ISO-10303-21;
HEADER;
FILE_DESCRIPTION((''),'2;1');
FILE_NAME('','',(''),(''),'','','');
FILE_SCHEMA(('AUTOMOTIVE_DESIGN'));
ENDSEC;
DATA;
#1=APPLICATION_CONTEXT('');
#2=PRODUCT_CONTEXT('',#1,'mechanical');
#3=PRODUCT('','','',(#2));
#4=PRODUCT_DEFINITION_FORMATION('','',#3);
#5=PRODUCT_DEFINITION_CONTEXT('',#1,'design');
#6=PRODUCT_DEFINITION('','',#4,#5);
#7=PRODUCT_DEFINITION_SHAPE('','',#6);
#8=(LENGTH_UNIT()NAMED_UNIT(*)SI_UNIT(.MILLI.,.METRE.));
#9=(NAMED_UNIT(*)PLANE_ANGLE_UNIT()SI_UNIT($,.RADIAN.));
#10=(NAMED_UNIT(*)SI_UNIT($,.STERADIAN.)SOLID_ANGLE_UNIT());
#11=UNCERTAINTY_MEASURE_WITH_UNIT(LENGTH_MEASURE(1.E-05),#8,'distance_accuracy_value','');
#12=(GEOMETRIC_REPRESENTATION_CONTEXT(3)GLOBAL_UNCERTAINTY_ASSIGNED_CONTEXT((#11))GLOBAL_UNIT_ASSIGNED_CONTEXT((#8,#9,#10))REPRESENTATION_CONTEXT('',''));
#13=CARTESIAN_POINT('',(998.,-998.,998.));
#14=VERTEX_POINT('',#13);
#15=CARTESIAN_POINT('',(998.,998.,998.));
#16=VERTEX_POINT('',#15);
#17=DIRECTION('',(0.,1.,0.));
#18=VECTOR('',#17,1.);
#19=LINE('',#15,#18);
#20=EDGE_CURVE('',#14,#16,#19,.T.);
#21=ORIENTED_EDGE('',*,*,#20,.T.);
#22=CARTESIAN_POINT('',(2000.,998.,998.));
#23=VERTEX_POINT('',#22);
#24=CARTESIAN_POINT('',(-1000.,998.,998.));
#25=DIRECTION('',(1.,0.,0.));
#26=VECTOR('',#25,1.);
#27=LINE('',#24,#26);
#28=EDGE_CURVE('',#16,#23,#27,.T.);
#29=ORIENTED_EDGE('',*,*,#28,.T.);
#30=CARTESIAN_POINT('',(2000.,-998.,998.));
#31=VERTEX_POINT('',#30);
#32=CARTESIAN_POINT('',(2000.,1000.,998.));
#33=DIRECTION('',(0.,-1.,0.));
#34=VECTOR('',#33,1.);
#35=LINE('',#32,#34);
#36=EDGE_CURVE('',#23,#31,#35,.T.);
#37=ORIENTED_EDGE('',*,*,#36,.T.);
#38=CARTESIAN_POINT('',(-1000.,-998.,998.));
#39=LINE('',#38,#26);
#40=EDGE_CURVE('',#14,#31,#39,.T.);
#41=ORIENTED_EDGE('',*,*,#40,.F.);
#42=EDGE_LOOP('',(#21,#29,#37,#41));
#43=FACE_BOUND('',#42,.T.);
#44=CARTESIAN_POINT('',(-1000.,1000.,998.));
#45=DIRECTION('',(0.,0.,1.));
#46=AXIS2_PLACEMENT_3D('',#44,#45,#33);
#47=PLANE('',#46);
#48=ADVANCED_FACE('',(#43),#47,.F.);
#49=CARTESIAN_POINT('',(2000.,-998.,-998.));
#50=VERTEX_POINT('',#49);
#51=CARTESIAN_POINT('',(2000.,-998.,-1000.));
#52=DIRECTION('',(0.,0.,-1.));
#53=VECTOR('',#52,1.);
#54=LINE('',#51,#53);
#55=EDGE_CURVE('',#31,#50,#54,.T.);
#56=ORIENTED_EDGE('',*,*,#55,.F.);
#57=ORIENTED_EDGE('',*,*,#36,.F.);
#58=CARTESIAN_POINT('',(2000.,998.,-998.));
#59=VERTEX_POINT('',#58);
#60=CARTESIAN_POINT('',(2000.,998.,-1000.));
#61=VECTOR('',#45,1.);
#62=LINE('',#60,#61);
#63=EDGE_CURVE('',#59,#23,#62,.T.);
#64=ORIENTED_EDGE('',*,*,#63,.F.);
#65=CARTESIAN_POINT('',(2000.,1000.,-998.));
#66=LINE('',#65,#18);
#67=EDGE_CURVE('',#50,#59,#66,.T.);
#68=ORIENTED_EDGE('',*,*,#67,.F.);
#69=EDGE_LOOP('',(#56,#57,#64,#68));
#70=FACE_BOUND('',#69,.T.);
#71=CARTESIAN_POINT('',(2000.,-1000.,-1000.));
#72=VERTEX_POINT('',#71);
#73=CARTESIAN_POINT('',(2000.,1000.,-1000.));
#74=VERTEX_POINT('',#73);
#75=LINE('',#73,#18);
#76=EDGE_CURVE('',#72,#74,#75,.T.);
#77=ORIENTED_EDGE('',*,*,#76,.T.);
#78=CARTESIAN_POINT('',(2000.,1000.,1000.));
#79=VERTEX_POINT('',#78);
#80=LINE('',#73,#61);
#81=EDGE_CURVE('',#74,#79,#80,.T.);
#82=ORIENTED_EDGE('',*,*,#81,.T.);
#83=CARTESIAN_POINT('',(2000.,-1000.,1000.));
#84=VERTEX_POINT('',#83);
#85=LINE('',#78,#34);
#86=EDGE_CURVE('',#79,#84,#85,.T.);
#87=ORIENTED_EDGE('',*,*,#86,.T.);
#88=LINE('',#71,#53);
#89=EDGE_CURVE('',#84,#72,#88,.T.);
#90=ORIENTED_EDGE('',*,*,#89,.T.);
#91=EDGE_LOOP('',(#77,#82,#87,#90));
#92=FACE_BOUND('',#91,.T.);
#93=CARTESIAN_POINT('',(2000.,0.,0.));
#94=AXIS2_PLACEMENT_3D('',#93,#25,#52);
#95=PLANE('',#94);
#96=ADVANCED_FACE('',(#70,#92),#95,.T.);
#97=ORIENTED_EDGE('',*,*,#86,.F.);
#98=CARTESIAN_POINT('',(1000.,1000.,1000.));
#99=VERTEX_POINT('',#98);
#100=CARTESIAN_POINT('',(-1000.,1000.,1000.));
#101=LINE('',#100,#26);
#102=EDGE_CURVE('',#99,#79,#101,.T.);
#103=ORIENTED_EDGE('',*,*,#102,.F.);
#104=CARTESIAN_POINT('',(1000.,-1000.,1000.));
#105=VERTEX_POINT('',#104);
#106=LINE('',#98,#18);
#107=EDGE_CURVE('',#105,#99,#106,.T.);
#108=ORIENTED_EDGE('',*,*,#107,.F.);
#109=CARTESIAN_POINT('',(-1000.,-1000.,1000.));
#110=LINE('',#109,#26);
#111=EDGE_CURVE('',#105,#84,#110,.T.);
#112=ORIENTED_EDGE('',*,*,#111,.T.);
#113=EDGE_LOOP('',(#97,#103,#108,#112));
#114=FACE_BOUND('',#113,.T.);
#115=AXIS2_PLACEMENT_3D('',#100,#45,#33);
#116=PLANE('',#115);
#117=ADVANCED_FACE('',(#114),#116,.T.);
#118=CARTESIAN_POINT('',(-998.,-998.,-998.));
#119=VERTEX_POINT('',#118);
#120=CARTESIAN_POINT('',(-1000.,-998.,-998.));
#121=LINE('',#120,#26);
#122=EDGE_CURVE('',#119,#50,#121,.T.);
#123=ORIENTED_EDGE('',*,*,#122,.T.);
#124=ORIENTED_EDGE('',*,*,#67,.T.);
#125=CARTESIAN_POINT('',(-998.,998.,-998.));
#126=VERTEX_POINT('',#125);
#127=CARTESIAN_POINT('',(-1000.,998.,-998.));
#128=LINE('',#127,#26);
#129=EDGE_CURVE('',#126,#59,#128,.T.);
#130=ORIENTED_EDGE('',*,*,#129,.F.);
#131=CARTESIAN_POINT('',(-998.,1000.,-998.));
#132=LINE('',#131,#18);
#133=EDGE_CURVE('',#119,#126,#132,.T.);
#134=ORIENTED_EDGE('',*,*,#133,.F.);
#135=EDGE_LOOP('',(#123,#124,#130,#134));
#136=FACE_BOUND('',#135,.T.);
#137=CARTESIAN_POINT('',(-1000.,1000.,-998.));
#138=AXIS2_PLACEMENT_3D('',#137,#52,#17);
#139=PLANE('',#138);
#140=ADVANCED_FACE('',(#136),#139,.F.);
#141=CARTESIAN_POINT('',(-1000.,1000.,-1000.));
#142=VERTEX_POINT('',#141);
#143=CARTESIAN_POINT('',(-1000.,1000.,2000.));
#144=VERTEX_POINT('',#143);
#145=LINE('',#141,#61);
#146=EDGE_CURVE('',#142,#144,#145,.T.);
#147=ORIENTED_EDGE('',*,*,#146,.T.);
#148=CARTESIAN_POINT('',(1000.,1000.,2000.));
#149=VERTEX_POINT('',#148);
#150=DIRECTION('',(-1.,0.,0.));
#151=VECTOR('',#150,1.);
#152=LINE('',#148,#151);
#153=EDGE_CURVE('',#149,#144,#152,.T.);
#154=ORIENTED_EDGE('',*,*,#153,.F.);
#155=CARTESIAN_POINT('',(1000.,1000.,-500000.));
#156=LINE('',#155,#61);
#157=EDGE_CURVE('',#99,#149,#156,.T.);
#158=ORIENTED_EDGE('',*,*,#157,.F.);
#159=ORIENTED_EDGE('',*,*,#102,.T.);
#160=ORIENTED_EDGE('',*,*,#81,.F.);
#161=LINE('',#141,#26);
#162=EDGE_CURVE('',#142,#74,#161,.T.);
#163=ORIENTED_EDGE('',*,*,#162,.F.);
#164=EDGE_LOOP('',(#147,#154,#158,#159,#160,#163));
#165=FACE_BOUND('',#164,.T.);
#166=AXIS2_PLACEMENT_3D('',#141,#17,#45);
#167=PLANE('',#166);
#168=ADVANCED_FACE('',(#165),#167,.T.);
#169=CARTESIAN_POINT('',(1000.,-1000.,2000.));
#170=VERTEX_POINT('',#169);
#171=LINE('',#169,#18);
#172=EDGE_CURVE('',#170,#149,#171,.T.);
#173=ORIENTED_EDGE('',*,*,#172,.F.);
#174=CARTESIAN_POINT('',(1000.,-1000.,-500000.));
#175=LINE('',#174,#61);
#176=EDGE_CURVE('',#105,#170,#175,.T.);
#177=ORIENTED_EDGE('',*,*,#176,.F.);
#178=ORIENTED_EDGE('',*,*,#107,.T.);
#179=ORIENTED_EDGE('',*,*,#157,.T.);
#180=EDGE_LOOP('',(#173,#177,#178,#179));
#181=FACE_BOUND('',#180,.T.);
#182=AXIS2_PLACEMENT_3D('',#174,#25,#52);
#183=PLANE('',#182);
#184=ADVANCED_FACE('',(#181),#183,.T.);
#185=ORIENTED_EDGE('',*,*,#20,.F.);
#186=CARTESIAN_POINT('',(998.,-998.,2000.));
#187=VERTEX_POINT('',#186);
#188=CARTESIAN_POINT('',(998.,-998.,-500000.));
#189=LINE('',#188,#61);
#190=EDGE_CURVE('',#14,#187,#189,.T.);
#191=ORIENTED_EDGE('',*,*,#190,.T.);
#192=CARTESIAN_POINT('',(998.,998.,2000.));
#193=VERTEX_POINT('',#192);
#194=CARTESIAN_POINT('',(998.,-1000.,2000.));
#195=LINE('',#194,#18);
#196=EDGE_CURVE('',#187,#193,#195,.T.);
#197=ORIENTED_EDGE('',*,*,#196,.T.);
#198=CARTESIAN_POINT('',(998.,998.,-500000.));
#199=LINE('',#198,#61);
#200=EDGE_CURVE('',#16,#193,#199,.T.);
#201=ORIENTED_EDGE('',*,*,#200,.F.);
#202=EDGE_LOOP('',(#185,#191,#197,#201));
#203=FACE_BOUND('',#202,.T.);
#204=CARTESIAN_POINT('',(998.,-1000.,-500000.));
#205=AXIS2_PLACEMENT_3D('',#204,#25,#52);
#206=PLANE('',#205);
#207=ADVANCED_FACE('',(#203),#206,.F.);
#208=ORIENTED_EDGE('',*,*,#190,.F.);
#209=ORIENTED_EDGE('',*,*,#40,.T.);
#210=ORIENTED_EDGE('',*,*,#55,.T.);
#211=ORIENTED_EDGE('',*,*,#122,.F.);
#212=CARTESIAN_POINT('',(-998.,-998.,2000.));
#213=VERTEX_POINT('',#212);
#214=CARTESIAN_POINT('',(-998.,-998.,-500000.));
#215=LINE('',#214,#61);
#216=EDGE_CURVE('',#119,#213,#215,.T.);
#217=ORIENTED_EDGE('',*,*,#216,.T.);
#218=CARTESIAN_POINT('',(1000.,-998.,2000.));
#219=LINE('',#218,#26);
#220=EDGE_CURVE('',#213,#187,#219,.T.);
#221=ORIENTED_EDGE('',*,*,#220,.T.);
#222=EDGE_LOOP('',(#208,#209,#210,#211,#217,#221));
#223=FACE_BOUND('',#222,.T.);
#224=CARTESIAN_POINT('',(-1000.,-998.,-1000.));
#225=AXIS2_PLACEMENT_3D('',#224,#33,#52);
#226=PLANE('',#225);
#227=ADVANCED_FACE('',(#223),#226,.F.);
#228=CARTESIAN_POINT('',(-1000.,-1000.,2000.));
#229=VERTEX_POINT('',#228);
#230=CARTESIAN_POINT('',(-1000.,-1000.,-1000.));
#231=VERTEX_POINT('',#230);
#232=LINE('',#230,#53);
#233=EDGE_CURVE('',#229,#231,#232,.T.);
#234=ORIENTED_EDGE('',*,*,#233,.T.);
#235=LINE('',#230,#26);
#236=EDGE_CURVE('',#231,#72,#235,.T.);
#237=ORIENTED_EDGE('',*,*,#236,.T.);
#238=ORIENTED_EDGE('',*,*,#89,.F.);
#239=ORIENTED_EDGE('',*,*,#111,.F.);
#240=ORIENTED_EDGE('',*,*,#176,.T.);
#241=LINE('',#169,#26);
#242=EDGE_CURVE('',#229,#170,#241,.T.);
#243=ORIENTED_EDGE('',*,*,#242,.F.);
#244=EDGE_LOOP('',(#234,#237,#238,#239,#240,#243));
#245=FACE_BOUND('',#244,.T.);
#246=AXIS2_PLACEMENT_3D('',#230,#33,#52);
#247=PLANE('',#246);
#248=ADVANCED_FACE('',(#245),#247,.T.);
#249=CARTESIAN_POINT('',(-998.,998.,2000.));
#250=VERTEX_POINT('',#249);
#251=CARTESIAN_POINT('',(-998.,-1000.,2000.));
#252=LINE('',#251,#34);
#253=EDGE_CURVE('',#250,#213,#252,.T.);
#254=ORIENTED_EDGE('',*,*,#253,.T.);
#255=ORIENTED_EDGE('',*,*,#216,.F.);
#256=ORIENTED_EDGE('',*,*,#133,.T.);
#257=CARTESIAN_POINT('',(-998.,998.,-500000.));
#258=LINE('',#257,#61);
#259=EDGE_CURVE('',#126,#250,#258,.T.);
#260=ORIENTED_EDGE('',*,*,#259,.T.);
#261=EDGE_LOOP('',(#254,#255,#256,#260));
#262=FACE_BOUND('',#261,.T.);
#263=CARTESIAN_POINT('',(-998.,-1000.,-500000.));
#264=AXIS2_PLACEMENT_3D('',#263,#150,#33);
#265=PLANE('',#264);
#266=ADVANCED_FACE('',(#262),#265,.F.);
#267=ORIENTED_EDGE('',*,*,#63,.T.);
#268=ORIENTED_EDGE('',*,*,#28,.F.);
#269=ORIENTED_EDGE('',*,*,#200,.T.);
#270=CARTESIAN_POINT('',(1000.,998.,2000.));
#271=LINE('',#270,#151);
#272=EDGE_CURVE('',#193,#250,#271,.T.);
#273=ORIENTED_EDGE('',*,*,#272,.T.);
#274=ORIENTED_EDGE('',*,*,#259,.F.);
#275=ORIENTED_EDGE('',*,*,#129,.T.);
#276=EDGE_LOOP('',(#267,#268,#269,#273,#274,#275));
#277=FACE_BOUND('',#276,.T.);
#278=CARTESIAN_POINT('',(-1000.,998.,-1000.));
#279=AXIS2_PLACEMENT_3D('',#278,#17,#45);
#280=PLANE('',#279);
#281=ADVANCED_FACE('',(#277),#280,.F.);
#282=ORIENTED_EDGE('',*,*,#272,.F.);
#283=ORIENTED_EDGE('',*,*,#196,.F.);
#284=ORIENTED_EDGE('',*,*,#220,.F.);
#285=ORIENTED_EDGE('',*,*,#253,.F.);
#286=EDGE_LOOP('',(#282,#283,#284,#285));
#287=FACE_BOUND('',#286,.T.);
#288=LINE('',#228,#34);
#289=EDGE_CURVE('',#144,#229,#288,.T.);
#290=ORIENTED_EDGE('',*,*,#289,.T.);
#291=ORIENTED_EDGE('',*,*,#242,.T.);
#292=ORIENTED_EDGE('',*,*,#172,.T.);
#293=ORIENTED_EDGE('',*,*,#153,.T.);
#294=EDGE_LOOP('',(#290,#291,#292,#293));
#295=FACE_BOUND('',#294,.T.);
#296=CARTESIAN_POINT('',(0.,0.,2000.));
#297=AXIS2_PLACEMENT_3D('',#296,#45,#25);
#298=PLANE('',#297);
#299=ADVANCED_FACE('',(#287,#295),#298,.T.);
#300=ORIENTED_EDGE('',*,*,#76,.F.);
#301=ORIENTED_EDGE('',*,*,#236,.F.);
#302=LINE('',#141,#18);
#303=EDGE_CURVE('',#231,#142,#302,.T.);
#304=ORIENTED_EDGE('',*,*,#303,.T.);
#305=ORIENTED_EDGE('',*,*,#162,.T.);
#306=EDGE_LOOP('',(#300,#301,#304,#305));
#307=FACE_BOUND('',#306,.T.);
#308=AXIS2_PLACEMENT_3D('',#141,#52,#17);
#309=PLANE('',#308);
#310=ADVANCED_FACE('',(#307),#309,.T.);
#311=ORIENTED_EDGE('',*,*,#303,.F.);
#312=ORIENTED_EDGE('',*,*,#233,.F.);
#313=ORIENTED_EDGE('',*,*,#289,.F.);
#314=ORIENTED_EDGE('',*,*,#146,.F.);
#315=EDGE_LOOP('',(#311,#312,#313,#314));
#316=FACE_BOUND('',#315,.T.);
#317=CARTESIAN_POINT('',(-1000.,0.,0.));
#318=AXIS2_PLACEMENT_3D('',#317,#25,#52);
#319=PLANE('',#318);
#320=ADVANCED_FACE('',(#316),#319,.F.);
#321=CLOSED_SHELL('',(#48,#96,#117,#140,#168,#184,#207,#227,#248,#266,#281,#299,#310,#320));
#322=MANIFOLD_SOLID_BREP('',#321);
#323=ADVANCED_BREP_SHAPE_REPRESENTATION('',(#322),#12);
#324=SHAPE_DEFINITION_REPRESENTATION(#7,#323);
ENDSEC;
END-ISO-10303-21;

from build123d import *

# Parameters (mm, degrees)
EXTRUDE_THIN1_START       = -1000
EXTRUDE_THIN1_OUTLINE_W   = 2000
EXTRUDE_THIN1_OUTLINE_H   = 2000
EXTRUDE_THIN1_OUTLINE_W_2 = 1996
EXTRUDE_THIN1_OUTLINE_H_2 = 1996
EXTRUDE_THIN1_DEPTH       = 3000
EXTRUDE_THIN2_START       = -1998
SKETCH2_W                 = 2000
SKETCH2_H                 = 2000
SKETCH2_W_2               = 1996
SKETCH2_H_2               = 1996
EXTRUDE_THIN2_DEPTH       = 2998
CUT_EXTRUDE1_REACH        = 3743.657
SKETCH3_W                 = 1996
SKETCH3_H                 = 1996
CUT_EXTRUDE2_REACH        = 3743.657
SKETCH4_W                 = 1996
SKETCH4_H                 = 1996


# Read off the part's stored shape, not the designer's step: Extrude-Thin1
with BuildPart() as part:
    # Extrude-Thin1 outline → Extrude-Thin1 (new body)
    with BuildSketch(Plane(origin=(0, 0, 0), x_dir=(0, 0, -1), z_dir=(1, 0, 0)).offset(EXTRUDE_THIN1_START)):
        Rectangle(EXTRUDE_THIN1_OUTLINE_W, EXTRUDE_THIN1_OUTLINE_H)
        Rectangle(EXTRUDE_THIN1_OUTLINE_W_2, EXTRUDE_THIN1_OUTLINE_H_2, mode=Mode.SUBTRACT)
    extrude(amount=EXTRUDE_THIN1_DEPTH)

    # Sketch2 → Extrude-Thin2 (add)
    with BuildSketch(Plane(origin=(0, 0, 1000), x_dir=(-1, 0, 0), z_dir=(0, 0, 1)).offset(EXTRUDE_THIN2_START)):
        Rectangle(SKETCH2_W, SKETCH2_H)
        Rectangle(SKETCH2_W_2, SKETCH2_H_2, mode=Mode.SUBTRACT)
    extrude(amount=EXTRUDE_THIN2_DEPTH)

    # Sketch3 → Cut-Extrude1 (cut, up to next)
    with BuildSketch(Plane(origin=(0, 0, 2000), x_dir=(-1, 0, 0), z_dir=(0, 0, 1)), mode=Mode.PRIVATE) as cut_extrude1_sk1:
        Rectangle(SKETCH3_W, SKETCH3_H)
    cut_extrude1_tool1 = extrude(cut_extrude1_sk1.sketch, amount=-CUT_EXTRUDE1_REACH, mode=Mode.PRIVATE) & part.part
    add(cut_extrude1_tool1.solids().sort_by_distance((0, 0, 2000))[0], mode=Mode.SUBTRACT)

    # Sketch4 → Cut-Extrude2 (cut, up to next)
    with BuildSketch(Plane(origin=(2000, 0, 0), x_dir=(0, 0, -1), z_dir=(1, 0, 0)), mode=Mode.PRIVATE) as cut_extrude2_sk1:
        Rectangle(SKETCH4_W, SKETCH4_H)
    cut_extrude2_tool1 = extrude(cut_extrude2_sk1.sketch, amount=-CUT_EXTRUDE2_REACH, mode=Mode.PRIVATE) & part.part
    add(cut_extrude2_tool1.solids().sort_by_distance((2000, 0, 0))[0], mode=Mode.SUBTRACT)


solid = part.part
